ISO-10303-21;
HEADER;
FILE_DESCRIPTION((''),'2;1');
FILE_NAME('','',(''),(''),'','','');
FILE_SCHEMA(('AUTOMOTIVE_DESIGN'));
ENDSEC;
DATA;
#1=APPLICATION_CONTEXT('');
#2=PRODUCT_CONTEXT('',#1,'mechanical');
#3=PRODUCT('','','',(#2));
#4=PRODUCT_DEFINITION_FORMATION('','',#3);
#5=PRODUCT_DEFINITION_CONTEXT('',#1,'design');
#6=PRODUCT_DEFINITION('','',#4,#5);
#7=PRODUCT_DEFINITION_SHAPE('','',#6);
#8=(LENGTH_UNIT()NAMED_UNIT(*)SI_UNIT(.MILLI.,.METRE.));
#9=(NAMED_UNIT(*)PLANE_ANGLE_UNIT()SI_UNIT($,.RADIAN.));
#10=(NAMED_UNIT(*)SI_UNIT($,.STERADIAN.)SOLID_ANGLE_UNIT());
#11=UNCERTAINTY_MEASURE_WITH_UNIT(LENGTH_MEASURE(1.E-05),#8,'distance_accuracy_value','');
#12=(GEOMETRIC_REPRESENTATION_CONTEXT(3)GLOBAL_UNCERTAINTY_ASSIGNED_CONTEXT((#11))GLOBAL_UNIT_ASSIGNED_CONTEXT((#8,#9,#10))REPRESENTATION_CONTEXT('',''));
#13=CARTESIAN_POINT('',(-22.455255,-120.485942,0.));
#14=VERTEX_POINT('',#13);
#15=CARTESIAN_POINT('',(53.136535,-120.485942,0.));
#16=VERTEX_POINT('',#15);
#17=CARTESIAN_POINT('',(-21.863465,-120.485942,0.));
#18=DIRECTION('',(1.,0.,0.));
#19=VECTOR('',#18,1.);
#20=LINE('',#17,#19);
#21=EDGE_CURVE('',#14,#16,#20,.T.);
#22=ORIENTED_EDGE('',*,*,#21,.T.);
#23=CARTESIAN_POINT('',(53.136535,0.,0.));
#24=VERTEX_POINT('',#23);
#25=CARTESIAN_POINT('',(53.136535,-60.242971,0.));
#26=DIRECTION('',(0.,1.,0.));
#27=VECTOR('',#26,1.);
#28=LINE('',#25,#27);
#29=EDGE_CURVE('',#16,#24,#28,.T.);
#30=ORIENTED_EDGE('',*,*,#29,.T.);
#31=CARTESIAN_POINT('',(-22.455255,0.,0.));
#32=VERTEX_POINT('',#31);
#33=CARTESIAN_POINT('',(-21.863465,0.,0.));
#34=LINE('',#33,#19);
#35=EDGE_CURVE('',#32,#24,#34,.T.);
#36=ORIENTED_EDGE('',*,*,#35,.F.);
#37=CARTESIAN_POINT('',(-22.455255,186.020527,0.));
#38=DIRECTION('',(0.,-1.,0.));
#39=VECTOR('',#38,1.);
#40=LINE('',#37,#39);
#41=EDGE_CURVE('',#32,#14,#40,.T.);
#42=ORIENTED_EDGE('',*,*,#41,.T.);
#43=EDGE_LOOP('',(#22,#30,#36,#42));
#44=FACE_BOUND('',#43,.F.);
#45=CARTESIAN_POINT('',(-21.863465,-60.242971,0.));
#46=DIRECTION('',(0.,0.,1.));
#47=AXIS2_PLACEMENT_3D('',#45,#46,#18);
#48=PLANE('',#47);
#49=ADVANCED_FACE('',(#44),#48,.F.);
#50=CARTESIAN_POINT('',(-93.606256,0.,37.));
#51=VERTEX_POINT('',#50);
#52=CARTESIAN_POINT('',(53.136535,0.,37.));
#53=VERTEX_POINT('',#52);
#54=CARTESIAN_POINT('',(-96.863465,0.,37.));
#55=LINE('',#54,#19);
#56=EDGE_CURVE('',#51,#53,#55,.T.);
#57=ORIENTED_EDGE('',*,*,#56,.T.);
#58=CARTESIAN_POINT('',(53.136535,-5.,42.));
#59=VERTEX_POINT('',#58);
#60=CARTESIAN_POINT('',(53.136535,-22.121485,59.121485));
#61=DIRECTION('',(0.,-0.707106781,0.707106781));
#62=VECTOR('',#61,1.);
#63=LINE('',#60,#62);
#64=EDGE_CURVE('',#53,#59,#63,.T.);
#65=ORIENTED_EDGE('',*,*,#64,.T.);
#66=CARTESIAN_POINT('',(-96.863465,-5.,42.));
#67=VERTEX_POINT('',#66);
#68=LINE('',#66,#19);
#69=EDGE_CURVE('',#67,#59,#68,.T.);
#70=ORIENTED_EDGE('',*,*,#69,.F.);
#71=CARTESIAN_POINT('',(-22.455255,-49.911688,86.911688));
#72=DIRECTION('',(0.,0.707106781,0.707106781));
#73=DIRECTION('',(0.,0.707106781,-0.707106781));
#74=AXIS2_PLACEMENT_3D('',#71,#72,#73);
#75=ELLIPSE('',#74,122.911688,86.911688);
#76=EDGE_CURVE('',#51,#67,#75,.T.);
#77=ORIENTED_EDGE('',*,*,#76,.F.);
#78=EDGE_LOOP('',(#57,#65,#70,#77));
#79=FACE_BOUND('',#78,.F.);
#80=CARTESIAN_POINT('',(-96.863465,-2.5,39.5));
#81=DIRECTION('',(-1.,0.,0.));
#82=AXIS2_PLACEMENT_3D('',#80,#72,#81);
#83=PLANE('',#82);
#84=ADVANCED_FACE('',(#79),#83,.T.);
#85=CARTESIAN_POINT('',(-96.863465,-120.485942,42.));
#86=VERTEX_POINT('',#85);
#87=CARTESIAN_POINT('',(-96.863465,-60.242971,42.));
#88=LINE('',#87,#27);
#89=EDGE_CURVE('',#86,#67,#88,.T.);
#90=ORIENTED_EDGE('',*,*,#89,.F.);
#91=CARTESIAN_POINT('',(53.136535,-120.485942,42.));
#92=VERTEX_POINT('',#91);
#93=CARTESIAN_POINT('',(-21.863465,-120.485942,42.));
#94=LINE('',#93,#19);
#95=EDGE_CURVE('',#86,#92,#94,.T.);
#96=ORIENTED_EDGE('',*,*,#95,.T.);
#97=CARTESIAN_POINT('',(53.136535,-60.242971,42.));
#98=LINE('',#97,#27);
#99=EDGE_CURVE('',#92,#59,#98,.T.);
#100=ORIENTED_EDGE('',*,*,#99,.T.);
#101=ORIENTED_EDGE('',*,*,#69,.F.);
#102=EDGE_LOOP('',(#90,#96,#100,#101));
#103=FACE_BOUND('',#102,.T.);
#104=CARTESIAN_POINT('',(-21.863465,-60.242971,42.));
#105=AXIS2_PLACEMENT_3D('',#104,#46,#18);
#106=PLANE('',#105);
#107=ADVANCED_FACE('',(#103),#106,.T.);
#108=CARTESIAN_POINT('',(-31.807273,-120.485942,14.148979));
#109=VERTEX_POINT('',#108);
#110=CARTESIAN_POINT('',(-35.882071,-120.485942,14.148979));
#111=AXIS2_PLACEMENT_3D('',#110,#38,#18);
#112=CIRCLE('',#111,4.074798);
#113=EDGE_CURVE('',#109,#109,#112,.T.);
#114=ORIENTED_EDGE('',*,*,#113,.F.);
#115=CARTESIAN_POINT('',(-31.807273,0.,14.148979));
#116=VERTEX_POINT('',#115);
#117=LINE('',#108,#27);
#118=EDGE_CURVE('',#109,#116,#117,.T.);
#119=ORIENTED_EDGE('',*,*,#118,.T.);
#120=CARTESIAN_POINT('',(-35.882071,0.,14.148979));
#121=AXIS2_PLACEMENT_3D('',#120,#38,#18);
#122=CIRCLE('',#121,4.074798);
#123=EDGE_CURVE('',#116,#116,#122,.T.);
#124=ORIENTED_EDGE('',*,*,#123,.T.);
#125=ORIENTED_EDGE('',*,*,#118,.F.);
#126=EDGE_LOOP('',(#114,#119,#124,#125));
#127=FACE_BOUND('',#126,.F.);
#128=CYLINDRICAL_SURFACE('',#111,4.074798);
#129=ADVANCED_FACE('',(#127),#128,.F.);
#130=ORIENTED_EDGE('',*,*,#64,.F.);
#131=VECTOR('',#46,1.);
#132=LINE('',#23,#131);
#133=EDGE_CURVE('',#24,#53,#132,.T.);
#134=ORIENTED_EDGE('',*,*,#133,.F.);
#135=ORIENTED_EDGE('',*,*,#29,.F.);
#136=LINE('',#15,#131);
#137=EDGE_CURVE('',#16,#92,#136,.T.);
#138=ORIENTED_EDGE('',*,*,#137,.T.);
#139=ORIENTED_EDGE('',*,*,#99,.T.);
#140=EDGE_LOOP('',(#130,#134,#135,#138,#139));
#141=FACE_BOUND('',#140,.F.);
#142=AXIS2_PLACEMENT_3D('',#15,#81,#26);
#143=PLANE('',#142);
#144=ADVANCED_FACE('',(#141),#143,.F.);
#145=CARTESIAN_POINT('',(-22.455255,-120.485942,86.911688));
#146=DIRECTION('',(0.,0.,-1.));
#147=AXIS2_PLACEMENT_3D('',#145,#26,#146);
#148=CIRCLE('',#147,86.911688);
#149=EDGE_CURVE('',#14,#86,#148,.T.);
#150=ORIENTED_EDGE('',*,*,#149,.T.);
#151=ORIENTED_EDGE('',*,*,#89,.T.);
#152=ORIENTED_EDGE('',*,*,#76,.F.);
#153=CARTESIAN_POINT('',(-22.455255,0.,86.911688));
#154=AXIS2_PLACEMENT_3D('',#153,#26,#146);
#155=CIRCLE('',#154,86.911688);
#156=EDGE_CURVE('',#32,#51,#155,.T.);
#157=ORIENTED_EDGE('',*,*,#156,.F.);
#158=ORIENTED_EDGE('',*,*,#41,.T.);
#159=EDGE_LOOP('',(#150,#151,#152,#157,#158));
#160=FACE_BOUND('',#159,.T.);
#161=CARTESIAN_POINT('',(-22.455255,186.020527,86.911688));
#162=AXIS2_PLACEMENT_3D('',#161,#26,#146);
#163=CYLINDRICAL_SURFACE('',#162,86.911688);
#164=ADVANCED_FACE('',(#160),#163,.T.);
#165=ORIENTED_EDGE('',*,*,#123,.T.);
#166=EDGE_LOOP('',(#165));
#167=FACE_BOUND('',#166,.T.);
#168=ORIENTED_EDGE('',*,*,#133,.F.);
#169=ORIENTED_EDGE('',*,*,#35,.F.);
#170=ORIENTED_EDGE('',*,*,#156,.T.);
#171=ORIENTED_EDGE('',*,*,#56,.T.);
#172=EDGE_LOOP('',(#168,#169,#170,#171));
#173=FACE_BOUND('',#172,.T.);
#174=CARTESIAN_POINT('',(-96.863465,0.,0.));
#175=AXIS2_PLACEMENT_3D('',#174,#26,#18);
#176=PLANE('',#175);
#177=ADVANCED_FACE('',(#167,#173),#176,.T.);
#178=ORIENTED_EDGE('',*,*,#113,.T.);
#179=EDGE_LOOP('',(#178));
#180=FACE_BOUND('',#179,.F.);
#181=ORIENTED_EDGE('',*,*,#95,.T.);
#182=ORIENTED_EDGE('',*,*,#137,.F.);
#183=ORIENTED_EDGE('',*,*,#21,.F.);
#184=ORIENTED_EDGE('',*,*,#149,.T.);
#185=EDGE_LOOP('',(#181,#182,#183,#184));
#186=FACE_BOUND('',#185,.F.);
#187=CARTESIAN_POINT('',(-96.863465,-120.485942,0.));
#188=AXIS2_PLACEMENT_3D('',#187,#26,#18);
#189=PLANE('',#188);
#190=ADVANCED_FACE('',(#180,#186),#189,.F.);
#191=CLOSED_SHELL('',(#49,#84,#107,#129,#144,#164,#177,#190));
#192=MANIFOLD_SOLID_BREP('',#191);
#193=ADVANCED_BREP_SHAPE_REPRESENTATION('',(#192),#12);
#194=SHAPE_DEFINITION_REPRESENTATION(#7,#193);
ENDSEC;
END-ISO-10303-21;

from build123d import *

# Parameters (mm, degrees)
F0_W        = 150
F0_H        = 120.4859416558
F1_DEPTH    = 42
F2_SIZE     = 5
F3_T1_DEPTH = 492.526994922
F6_R        = 4.0747978112
F7_DEPTH    = 192


# Not quite as in the source:
# - a fillet or chamfer that OpenCascade refuses, or shapes differently, is made with other operations: its cross-section is extruded or revolved along the edge and cut away or added
# - the program builds the solid bodies; features that only make, move or delete a surface that nothing else refers to are left out


with BuildPart() as f1:
    # F0 (on Top) → F1 (new body)
    with BuildSketch(Plane.XY):
        with Locations((-21.8634653855, -60.2429708279)):
            Rectangle(F0_W, F0_H)
    extrude(amount=F1_DEPTH)

    # F2
    f2_edges = [f1.edges().sort_by_distance(p)[0] for p in [
        (-21.863465, 0, 42),
    ]]
    chamfer(f2_edges, length=F2_SIZE)

    # F3: fillet of radius 86.9116882454 on 1 edges, made by hand

    # F3_s2 → F3_t1 (cut)
    with BuildSketch(Plane.XZ.offset(-186.0205266331)):
        with BuildLine():
            ThreePointArc((-22.4552547323, 0), (-65.1769758253, 11.2248591368), (-96.8634653855, 42))
            Line((-96.8634653855, 42), (-96.8634653855, 0))
            Line((-96.8634653855, 0), (-22.4552547323, 0))
        make_face()
    extrude(amount=F3_T1_DEPTH, mode=Mode.SUBTRACT)

    # F6 (on face) → F7 (cut)
    with BuildSketch(Plane.XZ.offset(120.4859416558)):
        with Locations((-35.8820706606, 14.1489794478)):
            Circle(F6_R)
    extrude(amount=-F7_DEPTH, mode=Mode.SUBTRACT)


solid = f1.part
